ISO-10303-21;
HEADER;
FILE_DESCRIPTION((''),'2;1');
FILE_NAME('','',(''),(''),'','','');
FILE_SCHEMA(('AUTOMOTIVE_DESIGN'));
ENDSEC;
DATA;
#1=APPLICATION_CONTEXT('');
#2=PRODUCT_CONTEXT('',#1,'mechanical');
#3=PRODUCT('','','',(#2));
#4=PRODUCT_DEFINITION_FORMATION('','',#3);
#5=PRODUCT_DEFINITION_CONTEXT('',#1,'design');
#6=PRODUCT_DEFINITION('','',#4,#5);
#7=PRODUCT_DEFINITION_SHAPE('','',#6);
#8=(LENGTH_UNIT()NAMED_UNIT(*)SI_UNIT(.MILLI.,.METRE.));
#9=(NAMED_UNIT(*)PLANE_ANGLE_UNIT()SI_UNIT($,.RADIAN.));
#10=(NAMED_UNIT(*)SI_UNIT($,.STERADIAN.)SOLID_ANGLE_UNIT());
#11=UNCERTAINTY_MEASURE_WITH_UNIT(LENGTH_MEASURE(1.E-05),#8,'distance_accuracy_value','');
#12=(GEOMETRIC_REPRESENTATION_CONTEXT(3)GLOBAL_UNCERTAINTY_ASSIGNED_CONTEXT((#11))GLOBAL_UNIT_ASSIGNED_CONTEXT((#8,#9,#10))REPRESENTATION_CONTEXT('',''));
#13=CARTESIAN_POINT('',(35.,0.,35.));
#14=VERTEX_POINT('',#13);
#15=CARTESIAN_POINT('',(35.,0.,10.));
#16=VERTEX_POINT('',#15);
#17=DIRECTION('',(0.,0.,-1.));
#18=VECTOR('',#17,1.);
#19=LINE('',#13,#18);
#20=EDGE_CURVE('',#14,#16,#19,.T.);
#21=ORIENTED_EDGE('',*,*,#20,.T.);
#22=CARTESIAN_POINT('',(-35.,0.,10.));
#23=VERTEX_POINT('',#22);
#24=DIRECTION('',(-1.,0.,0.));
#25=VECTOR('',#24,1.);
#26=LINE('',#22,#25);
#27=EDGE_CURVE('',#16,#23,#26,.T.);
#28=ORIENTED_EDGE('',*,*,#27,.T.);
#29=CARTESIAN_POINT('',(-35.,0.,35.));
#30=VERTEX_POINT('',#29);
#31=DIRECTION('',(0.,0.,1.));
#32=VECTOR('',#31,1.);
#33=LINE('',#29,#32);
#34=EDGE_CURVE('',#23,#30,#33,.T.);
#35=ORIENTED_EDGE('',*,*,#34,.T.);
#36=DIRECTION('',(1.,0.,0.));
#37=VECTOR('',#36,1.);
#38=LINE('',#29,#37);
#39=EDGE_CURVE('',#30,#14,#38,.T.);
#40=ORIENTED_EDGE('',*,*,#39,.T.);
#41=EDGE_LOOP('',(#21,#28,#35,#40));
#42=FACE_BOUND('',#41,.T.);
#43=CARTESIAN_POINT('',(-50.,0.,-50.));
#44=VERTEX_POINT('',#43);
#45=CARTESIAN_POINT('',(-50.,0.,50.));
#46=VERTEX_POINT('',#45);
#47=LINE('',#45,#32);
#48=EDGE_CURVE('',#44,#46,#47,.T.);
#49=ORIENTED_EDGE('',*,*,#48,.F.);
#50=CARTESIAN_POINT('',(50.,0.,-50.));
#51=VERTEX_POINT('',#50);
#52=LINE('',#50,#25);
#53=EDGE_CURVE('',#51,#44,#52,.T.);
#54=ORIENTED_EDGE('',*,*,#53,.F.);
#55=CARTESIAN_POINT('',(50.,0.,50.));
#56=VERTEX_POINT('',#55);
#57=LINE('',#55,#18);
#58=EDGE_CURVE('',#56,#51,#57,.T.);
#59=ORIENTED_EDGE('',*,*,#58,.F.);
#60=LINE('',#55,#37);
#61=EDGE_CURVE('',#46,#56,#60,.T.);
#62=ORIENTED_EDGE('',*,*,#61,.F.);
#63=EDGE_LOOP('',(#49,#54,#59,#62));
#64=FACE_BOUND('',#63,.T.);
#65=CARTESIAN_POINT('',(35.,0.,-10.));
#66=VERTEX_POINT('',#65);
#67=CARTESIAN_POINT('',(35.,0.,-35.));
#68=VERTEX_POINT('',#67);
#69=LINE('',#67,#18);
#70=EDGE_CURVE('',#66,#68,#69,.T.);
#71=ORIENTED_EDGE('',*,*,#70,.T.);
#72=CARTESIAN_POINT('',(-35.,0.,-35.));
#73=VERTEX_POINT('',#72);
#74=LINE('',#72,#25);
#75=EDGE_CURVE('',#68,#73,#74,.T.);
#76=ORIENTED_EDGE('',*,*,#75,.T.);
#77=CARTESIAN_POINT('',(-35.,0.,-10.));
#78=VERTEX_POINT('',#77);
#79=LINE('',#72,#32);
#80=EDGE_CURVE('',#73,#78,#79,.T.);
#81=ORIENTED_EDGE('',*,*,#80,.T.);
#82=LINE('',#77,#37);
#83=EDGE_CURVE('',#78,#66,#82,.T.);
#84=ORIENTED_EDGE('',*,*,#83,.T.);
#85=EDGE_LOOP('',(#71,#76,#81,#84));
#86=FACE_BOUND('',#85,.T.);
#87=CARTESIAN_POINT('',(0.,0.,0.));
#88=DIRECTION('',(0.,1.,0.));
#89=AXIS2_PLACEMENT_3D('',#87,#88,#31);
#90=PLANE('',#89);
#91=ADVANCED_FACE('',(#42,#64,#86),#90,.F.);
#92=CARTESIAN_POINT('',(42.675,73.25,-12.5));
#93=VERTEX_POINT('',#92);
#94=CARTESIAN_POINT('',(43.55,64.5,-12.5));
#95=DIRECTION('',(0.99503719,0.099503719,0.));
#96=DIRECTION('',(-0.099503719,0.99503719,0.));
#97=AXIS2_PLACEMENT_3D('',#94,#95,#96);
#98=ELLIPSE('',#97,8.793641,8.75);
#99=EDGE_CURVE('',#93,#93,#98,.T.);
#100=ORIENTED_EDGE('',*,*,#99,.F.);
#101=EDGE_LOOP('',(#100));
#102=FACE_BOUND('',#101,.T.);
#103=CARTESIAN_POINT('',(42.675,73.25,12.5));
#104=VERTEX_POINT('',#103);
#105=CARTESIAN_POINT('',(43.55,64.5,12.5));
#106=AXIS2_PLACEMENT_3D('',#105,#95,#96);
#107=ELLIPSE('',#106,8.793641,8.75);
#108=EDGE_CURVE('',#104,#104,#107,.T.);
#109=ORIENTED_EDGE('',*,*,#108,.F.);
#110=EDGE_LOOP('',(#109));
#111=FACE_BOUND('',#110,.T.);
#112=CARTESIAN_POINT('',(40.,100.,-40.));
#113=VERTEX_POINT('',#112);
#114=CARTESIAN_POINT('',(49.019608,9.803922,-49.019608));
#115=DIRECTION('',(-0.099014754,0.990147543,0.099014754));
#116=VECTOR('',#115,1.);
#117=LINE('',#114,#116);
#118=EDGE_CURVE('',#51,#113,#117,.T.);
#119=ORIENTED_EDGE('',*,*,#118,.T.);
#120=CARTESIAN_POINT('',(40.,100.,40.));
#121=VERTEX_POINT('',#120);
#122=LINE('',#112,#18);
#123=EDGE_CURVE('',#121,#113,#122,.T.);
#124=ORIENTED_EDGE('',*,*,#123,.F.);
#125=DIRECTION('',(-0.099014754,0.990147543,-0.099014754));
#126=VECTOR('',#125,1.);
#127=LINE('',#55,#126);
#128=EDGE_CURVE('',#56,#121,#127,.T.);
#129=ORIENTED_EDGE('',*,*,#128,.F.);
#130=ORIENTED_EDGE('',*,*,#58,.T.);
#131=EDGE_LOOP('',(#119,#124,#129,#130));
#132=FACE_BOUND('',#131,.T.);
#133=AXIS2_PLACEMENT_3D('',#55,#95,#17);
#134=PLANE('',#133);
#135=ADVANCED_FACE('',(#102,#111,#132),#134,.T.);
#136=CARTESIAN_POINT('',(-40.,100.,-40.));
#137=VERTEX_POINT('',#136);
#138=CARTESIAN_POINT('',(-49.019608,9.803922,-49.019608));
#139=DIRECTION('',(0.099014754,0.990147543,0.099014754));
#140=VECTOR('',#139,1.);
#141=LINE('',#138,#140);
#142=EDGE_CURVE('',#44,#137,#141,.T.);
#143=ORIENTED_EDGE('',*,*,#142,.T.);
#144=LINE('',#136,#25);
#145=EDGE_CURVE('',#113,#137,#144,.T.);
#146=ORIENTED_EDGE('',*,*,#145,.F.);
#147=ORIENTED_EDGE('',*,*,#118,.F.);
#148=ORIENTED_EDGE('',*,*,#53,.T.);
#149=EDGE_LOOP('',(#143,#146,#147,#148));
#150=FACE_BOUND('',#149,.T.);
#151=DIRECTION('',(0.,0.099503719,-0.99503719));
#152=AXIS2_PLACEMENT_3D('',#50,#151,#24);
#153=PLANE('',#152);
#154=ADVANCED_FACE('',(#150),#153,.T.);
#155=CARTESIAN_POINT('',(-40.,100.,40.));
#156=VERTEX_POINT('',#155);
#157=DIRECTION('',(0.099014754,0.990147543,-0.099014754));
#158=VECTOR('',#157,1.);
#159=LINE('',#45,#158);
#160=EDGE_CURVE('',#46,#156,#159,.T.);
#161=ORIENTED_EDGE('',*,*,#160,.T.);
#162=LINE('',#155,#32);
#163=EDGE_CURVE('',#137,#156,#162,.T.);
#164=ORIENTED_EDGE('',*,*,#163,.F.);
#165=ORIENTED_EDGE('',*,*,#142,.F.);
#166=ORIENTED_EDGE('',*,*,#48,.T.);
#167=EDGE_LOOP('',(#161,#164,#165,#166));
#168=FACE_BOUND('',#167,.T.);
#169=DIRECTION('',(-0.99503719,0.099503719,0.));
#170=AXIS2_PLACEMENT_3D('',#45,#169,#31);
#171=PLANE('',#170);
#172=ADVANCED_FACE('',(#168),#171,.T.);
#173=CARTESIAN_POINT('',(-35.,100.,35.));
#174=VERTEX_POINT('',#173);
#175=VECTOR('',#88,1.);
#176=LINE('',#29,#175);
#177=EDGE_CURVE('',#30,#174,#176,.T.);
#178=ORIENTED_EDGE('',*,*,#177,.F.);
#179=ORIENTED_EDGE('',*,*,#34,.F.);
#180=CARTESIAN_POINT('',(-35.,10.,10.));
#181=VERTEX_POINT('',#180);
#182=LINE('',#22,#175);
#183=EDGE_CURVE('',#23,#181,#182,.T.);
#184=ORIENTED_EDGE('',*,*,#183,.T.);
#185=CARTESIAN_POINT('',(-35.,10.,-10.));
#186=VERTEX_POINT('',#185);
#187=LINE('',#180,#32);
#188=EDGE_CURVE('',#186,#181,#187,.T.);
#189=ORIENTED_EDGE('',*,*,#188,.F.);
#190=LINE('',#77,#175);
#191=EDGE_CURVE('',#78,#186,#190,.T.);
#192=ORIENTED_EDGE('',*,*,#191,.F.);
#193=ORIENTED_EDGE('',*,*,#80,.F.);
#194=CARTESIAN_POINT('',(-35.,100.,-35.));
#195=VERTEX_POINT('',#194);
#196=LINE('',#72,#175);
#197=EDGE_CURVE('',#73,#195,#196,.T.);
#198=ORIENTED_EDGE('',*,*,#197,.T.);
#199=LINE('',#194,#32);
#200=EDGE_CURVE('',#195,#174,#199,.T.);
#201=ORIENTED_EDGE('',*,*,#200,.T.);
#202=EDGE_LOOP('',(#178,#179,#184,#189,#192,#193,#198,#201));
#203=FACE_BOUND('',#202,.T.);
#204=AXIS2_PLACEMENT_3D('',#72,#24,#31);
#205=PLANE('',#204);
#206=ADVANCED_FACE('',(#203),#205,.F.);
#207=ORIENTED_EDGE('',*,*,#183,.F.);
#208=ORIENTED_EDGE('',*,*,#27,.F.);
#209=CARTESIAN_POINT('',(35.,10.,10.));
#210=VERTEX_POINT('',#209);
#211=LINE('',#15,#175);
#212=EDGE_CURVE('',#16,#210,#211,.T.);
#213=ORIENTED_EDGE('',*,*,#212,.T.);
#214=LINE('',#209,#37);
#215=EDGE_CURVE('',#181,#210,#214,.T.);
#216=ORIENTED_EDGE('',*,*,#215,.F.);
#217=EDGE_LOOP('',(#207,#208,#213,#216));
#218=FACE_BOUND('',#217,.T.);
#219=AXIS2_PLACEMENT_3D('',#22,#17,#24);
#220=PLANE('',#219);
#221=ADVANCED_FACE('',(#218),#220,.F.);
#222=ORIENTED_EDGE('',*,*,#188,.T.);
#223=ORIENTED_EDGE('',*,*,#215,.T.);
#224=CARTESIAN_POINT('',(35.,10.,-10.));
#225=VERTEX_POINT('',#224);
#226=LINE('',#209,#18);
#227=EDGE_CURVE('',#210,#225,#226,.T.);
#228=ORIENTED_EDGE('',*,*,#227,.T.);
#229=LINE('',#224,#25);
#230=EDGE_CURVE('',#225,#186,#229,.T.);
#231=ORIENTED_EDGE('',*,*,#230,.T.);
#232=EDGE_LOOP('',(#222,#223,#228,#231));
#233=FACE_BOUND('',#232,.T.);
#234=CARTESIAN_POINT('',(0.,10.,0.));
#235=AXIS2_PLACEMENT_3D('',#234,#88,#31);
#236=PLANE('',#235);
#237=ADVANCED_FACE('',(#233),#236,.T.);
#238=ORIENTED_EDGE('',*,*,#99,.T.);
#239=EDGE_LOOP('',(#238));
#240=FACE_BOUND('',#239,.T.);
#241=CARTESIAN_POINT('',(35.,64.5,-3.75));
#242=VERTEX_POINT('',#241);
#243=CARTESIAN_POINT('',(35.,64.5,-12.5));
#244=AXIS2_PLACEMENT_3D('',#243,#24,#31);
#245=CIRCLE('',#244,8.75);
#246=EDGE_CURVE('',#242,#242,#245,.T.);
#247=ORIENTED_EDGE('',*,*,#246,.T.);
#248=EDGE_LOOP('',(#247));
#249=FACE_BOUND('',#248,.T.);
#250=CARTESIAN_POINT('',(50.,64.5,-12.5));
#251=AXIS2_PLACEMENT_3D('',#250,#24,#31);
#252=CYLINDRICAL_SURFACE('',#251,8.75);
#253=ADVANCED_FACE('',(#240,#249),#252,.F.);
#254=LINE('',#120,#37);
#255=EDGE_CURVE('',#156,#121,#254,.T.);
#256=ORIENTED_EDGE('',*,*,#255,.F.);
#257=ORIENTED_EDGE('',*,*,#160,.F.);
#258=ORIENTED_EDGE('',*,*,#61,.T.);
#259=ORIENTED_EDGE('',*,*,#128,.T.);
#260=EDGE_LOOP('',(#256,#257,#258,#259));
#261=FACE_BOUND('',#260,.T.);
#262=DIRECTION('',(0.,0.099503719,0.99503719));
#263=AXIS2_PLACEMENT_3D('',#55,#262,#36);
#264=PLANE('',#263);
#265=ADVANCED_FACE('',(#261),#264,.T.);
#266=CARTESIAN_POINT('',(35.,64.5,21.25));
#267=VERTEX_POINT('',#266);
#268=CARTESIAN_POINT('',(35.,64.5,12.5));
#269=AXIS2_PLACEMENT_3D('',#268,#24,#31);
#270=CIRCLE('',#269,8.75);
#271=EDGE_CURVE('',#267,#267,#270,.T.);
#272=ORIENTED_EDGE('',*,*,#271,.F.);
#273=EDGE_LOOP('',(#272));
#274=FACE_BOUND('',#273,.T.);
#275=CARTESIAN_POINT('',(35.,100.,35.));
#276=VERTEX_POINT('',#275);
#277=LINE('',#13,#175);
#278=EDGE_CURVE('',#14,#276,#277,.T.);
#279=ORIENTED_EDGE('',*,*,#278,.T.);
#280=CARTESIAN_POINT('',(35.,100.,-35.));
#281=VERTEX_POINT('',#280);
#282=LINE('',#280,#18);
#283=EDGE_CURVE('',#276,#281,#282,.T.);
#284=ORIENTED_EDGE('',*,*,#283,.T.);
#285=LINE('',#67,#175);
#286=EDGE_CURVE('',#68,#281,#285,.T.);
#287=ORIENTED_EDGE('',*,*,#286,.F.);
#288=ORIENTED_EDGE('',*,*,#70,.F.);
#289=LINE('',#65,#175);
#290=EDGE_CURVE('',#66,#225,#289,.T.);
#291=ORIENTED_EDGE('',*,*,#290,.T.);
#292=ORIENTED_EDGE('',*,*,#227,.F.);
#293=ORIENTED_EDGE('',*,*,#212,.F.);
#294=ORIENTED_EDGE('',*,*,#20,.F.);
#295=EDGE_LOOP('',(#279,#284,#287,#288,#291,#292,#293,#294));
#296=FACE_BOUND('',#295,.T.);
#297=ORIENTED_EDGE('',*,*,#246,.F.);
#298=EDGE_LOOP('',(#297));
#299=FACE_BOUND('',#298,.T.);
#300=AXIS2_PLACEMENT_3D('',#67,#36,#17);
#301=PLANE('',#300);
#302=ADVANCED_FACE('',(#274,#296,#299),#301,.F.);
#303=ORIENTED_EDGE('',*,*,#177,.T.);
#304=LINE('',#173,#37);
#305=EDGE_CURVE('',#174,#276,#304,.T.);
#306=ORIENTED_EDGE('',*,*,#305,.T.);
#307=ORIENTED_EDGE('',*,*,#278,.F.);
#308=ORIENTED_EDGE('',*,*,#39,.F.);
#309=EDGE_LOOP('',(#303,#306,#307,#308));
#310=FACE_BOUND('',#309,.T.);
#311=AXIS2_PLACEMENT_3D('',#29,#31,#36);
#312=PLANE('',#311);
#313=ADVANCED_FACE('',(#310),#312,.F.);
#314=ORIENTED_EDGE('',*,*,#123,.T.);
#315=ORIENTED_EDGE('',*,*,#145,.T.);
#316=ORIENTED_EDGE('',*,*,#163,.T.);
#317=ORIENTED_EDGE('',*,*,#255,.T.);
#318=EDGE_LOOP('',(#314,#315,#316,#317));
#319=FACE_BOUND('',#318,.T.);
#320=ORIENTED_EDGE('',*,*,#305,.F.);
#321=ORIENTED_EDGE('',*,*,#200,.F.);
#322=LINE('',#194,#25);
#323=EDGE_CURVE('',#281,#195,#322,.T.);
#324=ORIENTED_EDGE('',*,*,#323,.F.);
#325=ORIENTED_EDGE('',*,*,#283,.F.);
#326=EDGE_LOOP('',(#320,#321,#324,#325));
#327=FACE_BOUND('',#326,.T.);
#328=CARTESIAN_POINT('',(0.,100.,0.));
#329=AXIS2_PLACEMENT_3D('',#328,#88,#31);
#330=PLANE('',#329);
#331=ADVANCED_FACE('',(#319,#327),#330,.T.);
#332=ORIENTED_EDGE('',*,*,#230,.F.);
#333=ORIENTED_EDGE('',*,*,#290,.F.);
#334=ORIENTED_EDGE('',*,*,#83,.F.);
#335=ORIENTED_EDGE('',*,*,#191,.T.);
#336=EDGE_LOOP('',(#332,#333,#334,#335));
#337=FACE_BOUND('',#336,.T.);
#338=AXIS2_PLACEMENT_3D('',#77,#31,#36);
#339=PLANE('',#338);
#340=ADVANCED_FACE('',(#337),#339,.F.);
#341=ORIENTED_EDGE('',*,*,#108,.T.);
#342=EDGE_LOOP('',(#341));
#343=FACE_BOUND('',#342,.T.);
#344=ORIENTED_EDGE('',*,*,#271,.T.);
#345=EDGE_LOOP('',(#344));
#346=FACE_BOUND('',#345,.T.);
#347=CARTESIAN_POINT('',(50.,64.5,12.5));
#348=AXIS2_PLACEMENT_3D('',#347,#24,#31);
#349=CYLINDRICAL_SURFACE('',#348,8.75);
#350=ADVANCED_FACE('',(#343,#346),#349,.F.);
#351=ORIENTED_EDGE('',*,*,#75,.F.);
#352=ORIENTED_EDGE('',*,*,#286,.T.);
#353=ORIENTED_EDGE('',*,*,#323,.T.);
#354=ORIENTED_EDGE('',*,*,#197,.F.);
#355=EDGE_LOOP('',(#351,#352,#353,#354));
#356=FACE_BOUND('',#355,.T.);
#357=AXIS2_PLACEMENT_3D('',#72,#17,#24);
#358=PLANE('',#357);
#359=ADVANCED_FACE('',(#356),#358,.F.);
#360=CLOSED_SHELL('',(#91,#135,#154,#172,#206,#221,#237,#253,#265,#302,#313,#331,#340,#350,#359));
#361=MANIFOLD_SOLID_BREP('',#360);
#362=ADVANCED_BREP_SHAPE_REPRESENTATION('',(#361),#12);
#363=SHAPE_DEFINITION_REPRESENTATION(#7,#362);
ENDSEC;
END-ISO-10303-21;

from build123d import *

# Parameters (mm, degrees)
ESBO_O1_W                = 100
ESBO_O1_H                = 100
RESSALTO_EXTRUS_O1_DEPTH = 100
CHANFRO1_START           = -50
CHANFRO1_DEPTH           = 100
CHANFRO1_START_2         = -51
CHANFRO1_2_DEPTH         = 102
ESBO_O3_W                = 70
ESBO_O3_H                = 25
CORTE_EXTRUS_O1_DEPTH    = 123.474487139
ESBO_O4_W                = 70
ESBO_O4_H                = 20
CORTE_EXTRUS_O2_DEPTH    = 90
ESBO_O8_R                = 8.75
CORTE_EXTRUS_O6_DEPTH    = 141.445719052


with BuildPart() as part:
    # Esboço1 → Ressalto-extrusão1 (new body)
    with BuildSketch(Plane(origin=(0, 0, 0), x_dir=(1, 0, 0), z_dir=(0, 1, 0))):
        Rectangle(ESBO_O1_W, ESBO_O1_H)
    extrude(amount=RESSALTO_EXTRUS_O1_DEPTH)

    # Chanfro1: read off the stored shape, not the designer's step
    # Chanfro1 outline → Chanfro1 (cut)
    with BuildSketch(Plane.XY.offset(CHANFRO1_START)):
        Polygon((-50, 0), (-40, 100), (-50, 100), align=None)
        Polygon((40, 100), (50, 0), (50, 100), align=None)
    extrude(amount=CHANFRO1_DEPTH, mode=Mode.SUBTRACT)

    # Chanfro1 2 outline → Chanfro1 2 (cut)
    with BuildSketch(Plane.YZ.offset(CHANFRO1_START_2)):
        Polygon((0, 50), (100, 40), (100, 50), align=None)
        Polygon((100, -40), (0, -50), (100, -50), align=None)
    extrude(amount=CHANFRO1_2_DEPTH, mode=Mode.SUBTRACT)

    # Esboço3 → Corte-extrusão1 (cut, through all)
    with BuildSketch(Plane(origin=(0, 100, 0), x_dir=(1, 0, 0), z_dir=(0, 1, 0))):
        with Locations((0, 22.5)):
            Rectangle(ESBO_O3_W, ESBO_O3_H)
        with Locations((0, -22.5)):
            Rectangle(ESBO_O3_W, ESBO_O3_H)
    extrude(amount=-CORTE_EXTRUS_O1_DEPTH, mode=Mode.SUBTRACT)

    # Esboço4 → Corte-extrusão2 (cut)
    with BuildSketch(Plane(origin=(0, 100, 0), x_dir=(1, 0, 0), z_dir=(0, 1, 0))):
        Rectangle(ESBO_O4_W, ESBO_O4_H)
    extrude(amount=-CORTE_EXTRUS_O2_DEPTH, mode=Mode.SUBTRACT)

    # Esboço8 → Corte-extrusão6 (cut, through all)
    with BuildSketch(Plane.ZY.offset(-35)):
        with Locations((12.5, 64.5)):
            Circle(ESBO_O8_R)
        with Locations((-12.5, 64.5)):
            Circle(ESBO_O8_R)
    extrude(amount=-CORTE_EXTRUS_O6_DEPTH, mode=Mode.SUBTRACT)


solid = part.part
